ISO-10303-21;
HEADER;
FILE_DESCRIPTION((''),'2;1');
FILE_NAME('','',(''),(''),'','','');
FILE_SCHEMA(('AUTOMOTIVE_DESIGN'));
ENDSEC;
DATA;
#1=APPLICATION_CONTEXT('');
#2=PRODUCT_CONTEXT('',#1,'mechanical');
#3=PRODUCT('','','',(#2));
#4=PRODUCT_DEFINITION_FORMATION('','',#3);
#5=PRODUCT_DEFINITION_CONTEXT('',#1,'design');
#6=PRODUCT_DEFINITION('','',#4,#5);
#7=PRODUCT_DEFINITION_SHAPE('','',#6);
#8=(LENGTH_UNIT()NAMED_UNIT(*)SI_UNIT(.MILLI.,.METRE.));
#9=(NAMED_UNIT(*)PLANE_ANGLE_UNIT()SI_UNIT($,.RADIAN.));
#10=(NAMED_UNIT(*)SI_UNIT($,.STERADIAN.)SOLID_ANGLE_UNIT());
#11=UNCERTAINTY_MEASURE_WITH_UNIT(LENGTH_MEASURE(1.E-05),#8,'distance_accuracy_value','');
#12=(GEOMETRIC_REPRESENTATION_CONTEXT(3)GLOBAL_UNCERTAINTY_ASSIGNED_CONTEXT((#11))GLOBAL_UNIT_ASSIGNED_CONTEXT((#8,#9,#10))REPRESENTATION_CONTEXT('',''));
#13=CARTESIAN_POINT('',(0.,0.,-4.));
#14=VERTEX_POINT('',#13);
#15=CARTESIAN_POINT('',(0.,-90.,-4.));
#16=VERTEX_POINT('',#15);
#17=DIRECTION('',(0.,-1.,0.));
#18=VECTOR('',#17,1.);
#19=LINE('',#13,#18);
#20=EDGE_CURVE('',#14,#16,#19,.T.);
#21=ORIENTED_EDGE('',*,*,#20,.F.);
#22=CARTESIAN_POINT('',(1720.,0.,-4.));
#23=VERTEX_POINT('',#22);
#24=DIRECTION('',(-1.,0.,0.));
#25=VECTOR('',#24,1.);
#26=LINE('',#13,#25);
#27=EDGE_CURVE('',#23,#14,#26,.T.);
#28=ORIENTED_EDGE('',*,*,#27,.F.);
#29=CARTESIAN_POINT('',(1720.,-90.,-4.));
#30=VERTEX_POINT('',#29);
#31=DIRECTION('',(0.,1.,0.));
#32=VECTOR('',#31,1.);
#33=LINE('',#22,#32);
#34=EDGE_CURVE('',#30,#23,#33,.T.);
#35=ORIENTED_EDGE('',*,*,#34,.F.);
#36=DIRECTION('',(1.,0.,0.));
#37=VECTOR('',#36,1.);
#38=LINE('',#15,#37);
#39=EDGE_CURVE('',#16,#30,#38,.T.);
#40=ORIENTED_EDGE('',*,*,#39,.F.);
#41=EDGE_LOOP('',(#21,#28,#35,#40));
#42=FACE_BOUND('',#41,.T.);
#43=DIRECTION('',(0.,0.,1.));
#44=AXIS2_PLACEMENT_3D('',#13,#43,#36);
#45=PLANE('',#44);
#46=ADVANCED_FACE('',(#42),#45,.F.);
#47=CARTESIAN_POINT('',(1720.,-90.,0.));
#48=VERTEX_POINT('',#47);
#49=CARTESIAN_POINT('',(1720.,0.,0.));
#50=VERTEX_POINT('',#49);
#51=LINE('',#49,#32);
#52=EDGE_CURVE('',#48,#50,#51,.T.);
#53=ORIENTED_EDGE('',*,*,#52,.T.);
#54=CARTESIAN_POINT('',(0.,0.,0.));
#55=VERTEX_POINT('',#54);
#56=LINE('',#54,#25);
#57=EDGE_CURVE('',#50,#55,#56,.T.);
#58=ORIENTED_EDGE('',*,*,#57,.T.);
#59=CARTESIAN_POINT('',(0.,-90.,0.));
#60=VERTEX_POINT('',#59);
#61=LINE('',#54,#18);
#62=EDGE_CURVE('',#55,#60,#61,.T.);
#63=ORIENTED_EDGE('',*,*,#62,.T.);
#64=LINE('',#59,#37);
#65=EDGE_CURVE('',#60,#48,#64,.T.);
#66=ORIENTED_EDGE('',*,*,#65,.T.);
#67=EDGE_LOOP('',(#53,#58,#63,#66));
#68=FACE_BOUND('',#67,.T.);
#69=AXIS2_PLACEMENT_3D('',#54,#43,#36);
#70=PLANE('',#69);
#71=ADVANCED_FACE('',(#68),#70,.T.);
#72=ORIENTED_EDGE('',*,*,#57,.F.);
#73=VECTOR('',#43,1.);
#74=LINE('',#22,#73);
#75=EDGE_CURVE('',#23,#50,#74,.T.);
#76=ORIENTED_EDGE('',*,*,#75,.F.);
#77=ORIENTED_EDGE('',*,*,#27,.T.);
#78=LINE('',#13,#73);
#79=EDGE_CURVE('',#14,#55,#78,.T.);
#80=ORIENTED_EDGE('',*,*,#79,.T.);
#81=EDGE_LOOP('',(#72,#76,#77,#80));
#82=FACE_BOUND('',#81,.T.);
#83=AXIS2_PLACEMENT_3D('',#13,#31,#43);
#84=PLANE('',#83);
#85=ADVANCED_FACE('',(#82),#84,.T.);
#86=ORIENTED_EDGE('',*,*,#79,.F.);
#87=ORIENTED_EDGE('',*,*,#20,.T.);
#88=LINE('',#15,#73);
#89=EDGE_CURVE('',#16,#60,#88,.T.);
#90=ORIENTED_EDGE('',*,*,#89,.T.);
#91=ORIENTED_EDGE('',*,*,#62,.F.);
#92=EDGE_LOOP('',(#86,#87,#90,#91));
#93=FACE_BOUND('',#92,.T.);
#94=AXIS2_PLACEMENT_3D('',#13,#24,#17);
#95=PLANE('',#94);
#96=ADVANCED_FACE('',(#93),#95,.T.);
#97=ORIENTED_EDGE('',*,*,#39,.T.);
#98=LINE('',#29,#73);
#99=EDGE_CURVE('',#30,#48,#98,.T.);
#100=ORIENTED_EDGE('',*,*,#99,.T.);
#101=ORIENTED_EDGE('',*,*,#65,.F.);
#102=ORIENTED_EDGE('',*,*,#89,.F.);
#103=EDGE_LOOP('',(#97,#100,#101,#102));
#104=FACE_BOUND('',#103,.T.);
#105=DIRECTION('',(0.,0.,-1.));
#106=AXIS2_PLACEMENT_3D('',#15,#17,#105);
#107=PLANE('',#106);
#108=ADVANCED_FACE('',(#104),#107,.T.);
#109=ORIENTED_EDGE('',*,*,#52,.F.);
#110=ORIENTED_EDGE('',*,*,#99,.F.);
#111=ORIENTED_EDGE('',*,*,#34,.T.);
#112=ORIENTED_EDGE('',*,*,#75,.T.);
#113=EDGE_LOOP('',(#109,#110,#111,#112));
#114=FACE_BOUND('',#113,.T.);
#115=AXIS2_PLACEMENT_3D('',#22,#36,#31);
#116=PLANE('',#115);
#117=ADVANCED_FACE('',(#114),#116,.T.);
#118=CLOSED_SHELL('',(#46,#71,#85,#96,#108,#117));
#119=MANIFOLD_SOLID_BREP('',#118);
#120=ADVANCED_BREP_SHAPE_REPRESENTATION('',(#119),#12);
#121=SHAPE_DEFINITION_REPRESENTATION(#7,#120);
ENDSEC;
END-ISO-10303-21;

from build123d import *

# Parameters (mm, degrees)
IZIM1_W            = 1720
IZIM1_H            = 90
TABAN_FLAN_1_DEPTH = 4


# Sheet-metal steps are written as plain solids
with BuildPart() as part:
    # Çizim1 → Taban-Flanş1 (new body)
    with BuildSketch(Plane.XY):
        with Locations((860, -45)):
            Rectangle(IZIM1_W, IZIM1_H)
    extrude(amount=-TABAN_FLAN_1_DEPTH)


solid = part.part
